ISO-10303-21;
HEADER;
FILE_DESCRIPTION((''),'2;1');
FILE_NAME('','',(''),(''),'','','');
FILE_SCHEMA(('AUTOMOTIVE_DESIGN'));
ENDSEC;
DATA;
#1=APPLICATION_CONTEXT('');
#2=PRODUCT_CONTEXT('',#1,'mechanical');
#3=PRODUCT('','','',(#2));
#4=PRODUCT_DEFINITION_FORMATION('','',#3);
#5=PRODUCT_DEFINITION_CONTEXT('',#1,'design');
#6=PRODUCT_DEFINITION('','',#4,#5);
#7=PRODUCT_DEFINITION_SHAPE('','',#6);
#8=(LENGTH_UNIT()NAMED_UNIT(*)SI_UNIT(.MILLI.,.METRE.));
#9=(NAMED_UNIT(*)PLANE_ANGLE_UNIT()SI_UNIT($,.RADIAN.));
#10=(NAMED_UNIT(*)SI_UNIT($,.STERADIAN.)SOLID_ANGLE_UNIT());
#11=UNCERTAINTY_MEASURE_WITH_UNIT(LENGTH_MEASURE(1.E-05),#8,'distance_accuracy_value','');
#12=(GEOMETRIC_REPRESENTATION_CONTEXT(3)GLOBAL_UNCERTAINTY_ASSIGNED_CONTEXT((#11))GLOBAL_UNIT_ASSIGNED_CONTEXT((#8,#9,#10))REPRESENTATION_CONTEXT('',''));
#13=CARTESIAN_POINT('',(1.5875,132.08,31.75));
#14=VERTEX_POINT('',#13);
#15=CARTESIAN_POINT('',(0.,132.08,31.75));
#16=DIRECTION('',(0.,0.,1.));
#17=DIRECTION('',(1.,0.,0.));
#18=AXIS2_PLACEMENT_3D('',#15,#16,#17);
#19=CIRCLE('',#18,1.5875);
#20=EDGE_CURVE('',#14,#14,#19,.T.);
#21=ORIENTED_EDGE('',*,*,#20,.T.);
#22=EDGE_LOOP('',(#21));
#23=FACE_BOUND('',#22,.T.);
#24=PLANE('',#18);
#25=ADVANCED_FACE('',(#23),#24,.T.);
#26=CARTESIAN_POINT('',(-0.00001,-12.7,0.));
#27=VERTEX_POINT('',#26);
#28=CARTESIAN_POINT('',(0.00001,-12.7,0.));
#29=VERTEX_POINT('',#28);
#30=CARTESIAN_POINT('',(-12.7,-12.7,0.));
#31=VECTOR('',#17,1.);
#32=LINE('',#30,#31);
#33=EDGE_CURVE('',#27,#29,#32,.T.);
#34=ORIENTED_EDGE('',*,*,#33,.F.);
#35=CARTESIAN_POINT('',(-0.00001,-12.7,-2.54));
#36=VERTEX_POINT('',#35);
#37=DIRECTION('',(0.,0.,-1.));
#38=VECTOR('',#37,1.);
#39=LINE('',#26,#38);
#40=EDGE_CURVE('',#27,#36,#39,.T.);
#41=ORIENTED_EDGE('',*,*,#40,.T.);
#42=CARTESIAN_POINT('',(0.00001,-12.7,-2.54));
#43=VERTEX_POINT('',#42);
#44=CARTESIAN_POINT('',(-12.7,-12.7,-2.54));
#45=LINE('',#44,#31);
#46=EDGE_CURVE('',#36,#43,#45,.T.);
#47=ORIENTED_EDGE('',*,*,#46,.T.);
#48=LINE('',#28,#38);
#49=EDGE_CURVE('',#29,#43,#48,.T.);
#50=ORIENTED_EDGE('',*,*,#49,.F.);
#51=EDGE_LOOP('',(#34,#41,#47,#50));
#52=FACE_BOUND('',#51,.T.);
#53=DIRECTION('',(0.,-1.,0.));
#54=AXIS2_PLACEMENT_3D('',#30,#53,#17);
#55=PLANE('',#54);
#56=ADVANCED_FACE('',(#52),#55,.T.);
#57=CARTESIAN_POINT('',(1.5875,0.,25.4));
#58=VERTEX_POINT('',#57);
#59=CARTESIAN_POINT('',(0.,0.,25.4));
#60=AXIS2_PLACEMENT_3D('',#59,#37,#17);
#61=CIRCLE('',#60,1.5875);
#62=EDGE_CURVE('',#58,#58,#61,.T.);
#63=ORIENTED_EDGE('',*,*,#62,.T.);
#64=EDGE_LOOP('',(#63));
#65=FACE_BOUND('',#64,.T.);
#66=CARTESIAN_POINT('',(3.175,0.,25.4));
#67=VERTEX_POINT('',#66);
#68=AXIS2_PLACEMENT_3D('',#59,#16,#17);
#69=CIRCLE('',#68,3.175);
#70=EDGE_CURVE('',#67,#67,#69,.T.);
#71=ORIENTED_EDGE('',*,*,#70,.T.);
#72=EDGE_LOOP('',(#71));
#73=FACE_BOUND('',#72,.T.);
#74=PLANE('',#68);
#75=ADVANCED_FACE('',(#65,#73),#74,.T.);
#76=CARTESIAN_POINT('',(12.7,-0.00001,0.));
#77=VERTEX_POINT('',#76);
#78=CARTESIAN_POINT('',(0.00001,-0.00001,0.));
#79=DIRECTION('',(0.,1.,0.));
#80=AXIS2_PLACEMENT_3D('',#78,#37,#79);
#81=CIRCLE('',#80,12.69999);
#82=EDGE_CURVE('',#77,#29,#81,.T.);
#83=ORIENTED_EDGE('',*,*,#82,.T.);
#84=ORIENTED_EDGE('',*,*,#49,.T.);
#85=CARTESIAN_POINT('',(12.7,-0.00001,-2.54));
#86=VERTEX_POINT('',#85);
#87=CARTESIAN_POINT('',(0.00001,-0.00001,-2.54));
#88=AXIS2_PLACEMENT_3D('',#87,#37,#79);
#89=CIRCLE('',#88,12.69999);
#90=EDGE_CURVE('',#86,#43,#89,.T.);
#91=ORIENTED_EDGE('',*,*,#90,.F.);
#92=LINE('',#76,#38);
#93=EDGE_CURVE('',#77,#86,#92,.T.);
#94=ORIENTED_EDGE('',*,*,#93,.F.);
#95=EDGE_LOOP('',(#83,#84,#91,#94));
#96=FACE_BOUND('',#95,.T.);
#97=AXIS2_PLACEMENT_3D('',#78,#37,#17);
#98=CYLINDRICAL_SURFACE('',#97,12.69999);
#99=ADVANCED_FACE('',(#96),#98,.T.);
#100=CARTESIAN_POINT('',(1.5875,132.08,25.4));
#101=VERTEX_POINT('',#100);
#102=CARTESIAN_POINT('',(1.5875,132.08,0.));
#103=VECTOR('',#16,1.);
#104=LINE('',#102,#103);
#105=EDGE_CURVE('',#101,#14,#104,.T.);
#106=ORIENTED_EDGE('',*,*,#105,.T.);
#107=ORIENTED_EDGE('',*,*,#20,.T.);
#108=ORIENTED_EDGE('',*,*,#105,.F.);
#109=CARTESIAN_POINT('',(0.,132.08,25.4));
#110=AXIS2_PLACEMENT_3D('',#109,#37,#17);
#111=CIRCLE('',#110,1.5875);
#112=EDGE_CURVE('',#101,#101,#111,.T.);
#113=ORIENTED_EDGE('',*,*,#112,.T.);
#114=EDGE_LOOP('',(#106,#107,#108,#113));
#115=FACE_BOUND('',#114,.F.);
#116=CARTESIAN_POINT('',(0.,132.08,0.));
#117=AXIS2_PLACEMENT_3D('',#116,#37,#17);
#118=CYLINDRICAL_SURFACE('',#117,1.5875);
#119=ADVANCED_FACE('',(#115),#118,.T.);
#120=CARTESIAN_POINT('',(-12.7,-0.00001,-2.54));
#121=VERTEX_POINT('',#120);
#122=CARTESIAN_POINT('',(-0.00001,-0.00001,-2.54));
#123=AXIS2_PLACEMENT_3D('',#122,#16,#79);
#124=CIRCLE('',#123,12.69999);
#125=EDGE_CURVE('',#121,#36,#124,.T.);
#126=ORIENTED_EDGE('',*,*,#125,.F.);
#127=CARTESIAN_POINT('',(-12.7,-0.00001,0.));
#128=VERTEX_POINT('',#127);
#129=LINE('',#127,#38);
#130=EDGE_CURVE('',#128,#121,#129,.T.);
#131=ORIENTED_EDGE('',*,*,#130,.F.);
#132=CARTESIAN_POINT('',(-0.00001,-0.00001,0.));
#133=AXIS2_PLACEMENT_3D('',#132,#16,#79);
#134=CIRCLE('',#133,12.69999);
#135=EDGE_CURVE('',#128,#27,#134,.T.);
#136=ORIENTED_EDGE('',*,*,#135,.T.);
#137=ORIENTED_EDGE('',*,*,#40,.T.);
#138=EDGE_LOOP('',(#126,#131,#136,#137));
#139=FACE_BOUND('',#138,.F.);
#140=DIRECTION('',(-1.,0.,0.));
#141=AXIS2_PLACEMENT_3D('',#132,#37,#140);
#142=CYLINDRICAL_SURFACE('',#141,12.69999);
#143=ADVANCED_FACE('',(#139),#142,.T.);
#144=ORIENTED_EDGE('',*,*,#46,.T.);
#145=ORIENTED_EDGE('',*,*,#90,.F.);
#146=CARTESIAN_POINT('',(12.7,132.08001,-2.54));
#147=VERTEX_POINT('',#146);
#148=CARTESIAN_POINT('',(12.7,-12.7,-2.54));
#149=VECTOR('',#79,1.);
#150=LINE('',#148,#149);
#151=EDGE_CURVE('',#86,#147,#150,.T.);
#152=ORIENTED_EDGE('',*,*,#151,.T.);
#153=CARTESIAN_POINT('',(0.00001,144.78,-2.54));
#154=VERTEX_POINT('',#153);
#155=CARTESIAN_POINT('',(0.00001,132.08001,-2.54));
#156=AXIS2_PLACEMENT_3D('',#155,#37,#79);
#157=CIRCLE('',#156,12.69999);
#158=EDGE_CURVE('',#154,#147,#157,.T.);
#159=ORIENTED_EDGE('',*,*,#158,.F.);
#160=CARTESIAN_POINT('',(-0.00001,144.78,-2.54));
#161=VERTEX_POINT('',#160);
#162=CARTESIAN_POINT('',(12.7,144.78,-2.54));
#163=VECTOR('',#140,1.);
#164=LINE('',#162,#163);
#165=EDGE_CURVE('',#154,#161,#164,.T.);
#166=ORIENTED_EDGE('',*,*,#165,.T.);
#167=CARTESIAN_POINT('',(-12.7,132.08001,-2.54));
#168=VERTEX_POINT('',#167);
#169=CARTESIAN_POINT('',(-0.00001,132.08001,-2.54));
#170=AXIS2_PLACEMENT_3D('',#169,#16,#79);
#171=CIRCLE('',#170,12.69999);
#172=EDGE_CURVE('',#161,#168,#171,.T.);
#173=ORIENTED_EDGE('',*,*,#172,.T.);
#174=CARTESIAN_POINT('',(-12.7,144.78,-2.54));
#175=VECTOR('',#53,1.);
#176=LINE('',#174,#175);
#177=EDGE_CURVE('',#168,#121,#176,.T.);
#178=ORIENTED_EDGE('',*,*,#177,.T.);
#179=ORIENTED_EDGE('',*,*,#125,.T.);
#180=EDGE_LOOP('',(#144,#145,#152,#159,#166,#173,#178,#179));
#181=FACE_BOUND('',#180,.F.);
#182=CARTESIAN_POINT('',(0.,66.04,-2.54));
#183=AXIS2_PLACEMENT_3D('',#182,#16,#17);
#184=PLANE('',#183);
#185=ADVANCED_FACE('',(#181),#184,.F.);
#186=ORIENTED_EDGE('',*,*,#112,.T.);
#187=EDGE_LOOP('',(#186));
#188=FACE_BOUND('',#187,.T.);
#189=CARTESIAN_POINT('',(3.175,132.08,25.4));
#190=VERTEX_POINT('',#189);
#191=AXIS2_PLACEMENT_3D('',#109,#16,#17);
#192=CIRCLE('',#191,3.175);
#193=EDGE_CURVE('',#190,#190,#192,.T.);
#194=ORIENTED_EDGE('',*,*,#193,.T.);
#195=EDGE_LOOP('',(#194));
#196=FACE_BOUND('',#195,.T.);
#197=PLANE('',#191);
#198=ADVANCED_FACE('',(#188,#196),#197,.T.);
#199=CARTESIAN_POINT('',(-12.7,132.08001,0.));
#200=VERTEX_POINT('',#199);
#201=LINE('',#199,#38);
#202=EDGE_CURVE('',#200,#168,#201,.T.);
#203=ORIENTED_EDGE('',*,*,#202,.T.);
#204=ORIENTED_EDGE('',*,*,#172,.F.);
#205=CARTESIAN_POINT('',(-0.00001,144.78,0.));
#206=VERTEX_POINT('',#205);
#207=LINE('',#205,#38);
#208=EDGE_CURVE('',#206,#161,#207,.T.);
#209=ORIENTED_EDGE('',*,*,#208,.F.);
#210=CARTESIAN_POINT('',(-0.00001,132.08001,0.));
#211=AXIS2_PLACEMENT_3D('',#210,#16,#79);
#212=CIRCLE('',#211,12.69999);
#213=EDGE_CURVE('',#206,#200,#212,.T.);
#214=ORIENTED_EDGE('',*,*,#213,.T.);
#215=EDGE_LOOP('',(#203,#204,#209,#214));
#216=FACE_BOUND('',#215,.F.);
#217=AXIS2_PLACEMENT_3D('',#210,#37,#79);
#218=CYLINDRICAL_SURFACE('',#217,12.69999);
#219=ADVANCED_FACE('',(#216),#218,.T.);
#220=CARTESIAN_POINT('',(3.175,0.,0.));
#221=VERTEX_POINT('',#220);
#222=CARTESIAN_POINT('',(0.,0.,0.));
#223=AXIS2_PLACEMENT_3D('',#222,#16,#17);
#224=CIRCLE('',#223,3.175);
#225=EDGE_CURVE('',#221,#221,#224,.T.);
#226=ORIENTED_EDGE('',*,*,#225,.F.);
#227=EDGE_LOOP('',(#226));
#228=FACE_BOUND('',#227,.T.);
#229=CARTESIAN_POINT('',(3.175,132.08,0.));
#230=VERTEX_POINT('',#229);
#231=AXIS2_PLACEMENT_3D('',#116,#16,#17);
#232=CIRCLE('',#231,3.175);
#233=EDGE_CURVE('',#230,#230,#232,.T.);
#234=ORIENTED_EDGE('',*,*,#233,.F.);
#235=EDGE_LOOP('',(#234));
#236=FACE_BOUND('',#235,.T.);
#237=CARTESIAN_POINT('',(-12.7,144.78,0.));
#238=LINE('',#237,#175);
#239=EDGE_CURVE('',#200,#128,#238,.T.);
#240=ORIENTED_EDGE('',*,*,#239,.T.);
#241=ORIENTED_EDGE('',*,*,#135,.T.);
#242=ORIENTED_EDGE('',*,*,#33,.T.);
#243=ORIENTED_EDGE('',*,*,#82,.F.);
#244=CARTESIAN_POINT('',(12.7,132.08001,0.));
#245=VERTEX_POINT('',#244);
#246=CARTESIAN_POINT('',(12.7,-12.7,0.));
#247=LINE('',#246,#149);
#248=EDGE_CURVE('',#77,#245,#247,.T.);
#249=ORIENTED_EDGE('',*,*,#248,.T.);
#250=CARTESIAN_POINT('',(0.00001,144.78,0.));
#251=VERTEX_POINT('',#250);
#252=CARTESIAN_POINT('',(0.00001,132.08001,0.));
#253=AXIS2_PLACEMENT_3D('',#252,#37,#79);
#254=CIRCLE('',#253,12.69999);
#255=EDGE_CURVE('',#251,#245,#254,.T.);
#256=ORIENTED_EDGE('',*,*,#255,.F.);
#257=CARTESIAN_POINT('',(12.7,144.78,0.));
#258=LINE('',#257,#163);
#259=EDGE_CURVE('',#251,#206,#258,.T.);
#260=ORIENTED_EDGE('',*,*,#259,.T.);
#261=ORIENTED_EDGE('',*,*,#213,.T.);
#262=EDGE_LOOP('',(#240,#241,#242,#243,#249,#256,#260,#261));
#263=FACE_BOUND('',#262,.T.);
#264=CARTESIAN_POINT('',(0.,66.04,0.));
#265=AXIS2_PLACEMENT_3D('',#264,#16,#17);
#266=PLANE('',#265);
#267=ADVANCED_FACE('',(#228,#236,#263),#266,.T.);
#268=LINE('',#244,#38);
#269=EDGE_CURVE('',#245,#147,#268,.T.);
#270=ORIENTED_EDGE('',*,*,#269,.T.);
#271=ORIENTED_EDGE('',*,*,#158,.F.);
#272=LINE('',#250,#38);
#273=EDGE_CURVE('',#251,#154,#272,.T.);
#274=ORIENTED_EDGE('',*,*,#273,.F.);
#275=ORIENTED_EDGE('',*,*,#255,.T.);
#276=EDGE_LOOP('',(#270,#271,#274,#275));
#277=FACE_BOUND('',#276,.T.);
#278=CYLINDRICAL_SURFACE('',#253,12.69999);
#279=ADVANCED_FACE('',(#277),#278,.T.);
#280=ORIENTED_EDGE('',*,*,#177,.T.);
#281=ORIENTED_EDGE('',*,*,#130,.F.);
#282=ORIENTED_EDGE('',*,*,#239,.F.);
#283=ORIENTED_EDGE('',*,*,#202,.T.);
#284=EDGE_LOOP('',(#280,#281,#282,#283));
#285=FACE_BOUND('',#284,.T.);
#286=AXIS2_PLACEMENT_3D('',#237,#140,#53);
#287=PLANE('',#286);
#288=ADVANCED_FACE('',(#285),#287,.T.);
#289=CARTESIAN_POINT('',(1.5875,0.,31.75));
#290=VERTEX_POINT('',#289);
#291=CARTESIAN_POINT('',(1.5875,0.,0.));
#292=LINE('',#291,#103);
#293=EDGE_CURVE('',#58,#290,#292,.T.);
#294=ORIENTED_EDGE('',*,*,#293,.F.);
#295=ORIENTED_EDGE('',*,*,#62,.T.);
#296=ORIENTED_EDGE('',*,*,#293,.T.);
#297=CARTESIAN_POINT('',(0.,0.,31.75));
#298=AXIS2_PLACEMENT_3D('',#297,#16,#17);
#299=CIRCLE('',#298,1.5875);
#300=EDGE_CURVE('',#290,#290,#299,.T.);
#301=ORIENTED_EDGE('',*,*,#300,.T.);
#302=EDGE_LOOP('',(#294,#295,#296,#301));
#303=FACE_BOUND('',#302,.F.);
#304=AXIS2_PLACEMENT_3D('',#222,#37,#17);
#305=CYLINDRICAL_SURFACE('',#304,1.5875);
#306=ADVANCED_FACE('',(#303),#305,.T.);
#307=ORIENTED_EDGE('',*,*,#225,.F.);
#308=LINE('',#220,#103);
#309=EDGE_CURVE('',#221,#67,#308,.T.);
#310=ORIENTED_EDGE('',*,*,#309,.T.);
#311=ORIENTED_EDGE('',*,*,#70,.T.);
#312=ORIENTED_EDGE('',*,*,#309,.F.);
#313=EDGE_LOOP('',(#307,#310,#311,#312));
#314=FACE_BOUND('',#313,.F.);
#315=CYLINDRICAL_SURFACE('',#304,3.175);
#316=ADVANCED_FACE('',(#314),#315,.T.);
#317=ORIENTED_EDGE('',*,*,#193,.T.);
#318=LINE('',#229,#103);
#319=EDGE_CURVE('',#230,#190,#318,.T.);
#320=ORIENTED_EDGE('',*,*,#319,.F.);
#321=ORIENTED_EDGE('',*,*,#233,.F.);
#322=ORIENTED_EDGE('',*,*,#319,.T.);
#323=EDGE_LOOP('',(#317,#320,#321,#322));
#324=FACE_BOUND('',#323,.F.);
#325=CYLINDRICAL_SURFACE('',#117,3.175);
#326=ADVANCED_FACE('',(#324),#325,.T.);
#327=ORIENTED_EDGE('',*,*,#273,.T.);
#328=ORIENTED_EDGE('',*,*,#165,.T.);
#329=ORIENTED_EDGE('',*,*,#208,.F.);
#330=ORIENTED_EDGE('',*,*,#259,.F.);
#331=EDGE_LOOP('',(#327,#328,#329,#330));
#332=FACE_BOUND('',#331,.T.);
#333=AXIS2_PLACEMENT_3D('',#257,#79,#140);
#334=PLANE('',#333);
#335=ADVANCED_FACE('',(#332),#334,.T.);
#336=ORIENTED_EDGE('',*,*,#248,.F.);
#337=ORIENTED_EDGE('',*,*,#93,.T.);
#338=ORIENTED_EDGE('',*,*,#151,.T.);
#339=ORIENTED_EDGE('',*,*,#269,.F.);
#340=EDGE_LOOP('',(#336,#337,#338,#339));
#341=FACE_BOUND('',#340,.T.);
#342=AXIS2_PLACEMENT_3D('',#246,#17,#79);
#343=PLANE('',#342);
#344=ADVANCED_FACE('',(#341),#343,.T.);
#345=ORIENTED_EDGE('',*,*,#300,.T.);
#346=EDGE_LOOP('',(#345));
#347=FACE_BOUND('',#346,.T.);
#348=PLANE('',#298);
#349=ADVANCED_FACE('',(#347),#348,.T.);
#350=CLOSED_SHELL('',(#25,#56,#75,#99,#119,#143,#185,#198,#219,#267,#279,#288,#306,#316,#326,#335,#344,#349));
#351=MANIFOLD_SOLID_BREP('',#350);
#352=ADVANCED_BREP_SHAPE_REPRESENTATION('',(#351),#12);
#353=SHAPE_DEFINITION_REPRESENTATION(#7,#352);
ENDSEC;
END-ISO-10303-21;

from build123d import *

# Parameters (mm, degrees)
F0_R     = 3.175
F0_R_2   = 1.5875
F1_DEPTH = 2.54
F2_DEPTH = 25.4
F3_R     = 12.69999
F4_DEPTH = 31.75


# Not quite as in the source:
# - a fillet or chamfer is up to 0.001 mm smaller than in the source, because OpenCascade refuses the exact size


with BuildPart() as f1:
    # F0 (on Top) → F1 (new body)
    with BuildSketch(Plane.XY):
        Polygon((12.7, 144.78), (0, 144.78), (-12.7, 144.78), (-12.7, -12.7), (0, -12.7), (12.7, -12.7), align=None)
        Circle(F0_R, mode=Mode.SUBTRACT)
        with Locations((0, 132.08)):
            Circle(F0_R, mode=Mode.SUBTRACT)
        with Locations((0, 132.08)):
            Circle(F0_R)
        with Locations((0, 132.08)):
            Circle(F0_R_2, mode=Mode.SUBTRACT)
        with Locations((0, 132.08)):
            Circle(F0_R_2)
        Circle(F0_R)
        Circle(F0_R_2, mode=Mode.SUBTRACT)
        Circle(F0_R_2)
    extrude(amount=-F1_DEPTH)

    # F0 (on Top) → F2 (join)
    with BuildSketch(Plane.XY):
        with Locations((0, 132.08)):
            Circle(F0_R)
        with Locations((0, 132.08)):
            Circle(F0_R_2, mode=Mode.SUBTRACT)
        Circle(F0_R)
        Circle(F0_R_2, mode=Mode.SUBTRACT)
        with Locations((0, 132.08)):
            Circle(F0_R_2)
        Circle(F0_R_2)
    extrude(amount=F2_DEPTH)

    # F3 (radius 12.7 in the source; OpenCascade refuses exactly that, so slightly less here)
    f3_edges = [f1.edges().sort_by_distance(p)[0] for p in [
        (12.7, 144.78, -1.27),
        (-12.7, 144.78, -1.27),
        (-12.7, -12.7, -1.27),
        (12.7, -12.7, -1.27),
    ]]
    fillet(f3_edges, radius=F3_R)

    # F0 (on Top) → F4 (join)
    with BuildSketch(Plane.XY):
        Circle(F0_R_2)
        with Locations((0, 132.08)):
            Circle(F0_R_2)
    extrude(amount=F4_DEPTH)


solid = f1.part
